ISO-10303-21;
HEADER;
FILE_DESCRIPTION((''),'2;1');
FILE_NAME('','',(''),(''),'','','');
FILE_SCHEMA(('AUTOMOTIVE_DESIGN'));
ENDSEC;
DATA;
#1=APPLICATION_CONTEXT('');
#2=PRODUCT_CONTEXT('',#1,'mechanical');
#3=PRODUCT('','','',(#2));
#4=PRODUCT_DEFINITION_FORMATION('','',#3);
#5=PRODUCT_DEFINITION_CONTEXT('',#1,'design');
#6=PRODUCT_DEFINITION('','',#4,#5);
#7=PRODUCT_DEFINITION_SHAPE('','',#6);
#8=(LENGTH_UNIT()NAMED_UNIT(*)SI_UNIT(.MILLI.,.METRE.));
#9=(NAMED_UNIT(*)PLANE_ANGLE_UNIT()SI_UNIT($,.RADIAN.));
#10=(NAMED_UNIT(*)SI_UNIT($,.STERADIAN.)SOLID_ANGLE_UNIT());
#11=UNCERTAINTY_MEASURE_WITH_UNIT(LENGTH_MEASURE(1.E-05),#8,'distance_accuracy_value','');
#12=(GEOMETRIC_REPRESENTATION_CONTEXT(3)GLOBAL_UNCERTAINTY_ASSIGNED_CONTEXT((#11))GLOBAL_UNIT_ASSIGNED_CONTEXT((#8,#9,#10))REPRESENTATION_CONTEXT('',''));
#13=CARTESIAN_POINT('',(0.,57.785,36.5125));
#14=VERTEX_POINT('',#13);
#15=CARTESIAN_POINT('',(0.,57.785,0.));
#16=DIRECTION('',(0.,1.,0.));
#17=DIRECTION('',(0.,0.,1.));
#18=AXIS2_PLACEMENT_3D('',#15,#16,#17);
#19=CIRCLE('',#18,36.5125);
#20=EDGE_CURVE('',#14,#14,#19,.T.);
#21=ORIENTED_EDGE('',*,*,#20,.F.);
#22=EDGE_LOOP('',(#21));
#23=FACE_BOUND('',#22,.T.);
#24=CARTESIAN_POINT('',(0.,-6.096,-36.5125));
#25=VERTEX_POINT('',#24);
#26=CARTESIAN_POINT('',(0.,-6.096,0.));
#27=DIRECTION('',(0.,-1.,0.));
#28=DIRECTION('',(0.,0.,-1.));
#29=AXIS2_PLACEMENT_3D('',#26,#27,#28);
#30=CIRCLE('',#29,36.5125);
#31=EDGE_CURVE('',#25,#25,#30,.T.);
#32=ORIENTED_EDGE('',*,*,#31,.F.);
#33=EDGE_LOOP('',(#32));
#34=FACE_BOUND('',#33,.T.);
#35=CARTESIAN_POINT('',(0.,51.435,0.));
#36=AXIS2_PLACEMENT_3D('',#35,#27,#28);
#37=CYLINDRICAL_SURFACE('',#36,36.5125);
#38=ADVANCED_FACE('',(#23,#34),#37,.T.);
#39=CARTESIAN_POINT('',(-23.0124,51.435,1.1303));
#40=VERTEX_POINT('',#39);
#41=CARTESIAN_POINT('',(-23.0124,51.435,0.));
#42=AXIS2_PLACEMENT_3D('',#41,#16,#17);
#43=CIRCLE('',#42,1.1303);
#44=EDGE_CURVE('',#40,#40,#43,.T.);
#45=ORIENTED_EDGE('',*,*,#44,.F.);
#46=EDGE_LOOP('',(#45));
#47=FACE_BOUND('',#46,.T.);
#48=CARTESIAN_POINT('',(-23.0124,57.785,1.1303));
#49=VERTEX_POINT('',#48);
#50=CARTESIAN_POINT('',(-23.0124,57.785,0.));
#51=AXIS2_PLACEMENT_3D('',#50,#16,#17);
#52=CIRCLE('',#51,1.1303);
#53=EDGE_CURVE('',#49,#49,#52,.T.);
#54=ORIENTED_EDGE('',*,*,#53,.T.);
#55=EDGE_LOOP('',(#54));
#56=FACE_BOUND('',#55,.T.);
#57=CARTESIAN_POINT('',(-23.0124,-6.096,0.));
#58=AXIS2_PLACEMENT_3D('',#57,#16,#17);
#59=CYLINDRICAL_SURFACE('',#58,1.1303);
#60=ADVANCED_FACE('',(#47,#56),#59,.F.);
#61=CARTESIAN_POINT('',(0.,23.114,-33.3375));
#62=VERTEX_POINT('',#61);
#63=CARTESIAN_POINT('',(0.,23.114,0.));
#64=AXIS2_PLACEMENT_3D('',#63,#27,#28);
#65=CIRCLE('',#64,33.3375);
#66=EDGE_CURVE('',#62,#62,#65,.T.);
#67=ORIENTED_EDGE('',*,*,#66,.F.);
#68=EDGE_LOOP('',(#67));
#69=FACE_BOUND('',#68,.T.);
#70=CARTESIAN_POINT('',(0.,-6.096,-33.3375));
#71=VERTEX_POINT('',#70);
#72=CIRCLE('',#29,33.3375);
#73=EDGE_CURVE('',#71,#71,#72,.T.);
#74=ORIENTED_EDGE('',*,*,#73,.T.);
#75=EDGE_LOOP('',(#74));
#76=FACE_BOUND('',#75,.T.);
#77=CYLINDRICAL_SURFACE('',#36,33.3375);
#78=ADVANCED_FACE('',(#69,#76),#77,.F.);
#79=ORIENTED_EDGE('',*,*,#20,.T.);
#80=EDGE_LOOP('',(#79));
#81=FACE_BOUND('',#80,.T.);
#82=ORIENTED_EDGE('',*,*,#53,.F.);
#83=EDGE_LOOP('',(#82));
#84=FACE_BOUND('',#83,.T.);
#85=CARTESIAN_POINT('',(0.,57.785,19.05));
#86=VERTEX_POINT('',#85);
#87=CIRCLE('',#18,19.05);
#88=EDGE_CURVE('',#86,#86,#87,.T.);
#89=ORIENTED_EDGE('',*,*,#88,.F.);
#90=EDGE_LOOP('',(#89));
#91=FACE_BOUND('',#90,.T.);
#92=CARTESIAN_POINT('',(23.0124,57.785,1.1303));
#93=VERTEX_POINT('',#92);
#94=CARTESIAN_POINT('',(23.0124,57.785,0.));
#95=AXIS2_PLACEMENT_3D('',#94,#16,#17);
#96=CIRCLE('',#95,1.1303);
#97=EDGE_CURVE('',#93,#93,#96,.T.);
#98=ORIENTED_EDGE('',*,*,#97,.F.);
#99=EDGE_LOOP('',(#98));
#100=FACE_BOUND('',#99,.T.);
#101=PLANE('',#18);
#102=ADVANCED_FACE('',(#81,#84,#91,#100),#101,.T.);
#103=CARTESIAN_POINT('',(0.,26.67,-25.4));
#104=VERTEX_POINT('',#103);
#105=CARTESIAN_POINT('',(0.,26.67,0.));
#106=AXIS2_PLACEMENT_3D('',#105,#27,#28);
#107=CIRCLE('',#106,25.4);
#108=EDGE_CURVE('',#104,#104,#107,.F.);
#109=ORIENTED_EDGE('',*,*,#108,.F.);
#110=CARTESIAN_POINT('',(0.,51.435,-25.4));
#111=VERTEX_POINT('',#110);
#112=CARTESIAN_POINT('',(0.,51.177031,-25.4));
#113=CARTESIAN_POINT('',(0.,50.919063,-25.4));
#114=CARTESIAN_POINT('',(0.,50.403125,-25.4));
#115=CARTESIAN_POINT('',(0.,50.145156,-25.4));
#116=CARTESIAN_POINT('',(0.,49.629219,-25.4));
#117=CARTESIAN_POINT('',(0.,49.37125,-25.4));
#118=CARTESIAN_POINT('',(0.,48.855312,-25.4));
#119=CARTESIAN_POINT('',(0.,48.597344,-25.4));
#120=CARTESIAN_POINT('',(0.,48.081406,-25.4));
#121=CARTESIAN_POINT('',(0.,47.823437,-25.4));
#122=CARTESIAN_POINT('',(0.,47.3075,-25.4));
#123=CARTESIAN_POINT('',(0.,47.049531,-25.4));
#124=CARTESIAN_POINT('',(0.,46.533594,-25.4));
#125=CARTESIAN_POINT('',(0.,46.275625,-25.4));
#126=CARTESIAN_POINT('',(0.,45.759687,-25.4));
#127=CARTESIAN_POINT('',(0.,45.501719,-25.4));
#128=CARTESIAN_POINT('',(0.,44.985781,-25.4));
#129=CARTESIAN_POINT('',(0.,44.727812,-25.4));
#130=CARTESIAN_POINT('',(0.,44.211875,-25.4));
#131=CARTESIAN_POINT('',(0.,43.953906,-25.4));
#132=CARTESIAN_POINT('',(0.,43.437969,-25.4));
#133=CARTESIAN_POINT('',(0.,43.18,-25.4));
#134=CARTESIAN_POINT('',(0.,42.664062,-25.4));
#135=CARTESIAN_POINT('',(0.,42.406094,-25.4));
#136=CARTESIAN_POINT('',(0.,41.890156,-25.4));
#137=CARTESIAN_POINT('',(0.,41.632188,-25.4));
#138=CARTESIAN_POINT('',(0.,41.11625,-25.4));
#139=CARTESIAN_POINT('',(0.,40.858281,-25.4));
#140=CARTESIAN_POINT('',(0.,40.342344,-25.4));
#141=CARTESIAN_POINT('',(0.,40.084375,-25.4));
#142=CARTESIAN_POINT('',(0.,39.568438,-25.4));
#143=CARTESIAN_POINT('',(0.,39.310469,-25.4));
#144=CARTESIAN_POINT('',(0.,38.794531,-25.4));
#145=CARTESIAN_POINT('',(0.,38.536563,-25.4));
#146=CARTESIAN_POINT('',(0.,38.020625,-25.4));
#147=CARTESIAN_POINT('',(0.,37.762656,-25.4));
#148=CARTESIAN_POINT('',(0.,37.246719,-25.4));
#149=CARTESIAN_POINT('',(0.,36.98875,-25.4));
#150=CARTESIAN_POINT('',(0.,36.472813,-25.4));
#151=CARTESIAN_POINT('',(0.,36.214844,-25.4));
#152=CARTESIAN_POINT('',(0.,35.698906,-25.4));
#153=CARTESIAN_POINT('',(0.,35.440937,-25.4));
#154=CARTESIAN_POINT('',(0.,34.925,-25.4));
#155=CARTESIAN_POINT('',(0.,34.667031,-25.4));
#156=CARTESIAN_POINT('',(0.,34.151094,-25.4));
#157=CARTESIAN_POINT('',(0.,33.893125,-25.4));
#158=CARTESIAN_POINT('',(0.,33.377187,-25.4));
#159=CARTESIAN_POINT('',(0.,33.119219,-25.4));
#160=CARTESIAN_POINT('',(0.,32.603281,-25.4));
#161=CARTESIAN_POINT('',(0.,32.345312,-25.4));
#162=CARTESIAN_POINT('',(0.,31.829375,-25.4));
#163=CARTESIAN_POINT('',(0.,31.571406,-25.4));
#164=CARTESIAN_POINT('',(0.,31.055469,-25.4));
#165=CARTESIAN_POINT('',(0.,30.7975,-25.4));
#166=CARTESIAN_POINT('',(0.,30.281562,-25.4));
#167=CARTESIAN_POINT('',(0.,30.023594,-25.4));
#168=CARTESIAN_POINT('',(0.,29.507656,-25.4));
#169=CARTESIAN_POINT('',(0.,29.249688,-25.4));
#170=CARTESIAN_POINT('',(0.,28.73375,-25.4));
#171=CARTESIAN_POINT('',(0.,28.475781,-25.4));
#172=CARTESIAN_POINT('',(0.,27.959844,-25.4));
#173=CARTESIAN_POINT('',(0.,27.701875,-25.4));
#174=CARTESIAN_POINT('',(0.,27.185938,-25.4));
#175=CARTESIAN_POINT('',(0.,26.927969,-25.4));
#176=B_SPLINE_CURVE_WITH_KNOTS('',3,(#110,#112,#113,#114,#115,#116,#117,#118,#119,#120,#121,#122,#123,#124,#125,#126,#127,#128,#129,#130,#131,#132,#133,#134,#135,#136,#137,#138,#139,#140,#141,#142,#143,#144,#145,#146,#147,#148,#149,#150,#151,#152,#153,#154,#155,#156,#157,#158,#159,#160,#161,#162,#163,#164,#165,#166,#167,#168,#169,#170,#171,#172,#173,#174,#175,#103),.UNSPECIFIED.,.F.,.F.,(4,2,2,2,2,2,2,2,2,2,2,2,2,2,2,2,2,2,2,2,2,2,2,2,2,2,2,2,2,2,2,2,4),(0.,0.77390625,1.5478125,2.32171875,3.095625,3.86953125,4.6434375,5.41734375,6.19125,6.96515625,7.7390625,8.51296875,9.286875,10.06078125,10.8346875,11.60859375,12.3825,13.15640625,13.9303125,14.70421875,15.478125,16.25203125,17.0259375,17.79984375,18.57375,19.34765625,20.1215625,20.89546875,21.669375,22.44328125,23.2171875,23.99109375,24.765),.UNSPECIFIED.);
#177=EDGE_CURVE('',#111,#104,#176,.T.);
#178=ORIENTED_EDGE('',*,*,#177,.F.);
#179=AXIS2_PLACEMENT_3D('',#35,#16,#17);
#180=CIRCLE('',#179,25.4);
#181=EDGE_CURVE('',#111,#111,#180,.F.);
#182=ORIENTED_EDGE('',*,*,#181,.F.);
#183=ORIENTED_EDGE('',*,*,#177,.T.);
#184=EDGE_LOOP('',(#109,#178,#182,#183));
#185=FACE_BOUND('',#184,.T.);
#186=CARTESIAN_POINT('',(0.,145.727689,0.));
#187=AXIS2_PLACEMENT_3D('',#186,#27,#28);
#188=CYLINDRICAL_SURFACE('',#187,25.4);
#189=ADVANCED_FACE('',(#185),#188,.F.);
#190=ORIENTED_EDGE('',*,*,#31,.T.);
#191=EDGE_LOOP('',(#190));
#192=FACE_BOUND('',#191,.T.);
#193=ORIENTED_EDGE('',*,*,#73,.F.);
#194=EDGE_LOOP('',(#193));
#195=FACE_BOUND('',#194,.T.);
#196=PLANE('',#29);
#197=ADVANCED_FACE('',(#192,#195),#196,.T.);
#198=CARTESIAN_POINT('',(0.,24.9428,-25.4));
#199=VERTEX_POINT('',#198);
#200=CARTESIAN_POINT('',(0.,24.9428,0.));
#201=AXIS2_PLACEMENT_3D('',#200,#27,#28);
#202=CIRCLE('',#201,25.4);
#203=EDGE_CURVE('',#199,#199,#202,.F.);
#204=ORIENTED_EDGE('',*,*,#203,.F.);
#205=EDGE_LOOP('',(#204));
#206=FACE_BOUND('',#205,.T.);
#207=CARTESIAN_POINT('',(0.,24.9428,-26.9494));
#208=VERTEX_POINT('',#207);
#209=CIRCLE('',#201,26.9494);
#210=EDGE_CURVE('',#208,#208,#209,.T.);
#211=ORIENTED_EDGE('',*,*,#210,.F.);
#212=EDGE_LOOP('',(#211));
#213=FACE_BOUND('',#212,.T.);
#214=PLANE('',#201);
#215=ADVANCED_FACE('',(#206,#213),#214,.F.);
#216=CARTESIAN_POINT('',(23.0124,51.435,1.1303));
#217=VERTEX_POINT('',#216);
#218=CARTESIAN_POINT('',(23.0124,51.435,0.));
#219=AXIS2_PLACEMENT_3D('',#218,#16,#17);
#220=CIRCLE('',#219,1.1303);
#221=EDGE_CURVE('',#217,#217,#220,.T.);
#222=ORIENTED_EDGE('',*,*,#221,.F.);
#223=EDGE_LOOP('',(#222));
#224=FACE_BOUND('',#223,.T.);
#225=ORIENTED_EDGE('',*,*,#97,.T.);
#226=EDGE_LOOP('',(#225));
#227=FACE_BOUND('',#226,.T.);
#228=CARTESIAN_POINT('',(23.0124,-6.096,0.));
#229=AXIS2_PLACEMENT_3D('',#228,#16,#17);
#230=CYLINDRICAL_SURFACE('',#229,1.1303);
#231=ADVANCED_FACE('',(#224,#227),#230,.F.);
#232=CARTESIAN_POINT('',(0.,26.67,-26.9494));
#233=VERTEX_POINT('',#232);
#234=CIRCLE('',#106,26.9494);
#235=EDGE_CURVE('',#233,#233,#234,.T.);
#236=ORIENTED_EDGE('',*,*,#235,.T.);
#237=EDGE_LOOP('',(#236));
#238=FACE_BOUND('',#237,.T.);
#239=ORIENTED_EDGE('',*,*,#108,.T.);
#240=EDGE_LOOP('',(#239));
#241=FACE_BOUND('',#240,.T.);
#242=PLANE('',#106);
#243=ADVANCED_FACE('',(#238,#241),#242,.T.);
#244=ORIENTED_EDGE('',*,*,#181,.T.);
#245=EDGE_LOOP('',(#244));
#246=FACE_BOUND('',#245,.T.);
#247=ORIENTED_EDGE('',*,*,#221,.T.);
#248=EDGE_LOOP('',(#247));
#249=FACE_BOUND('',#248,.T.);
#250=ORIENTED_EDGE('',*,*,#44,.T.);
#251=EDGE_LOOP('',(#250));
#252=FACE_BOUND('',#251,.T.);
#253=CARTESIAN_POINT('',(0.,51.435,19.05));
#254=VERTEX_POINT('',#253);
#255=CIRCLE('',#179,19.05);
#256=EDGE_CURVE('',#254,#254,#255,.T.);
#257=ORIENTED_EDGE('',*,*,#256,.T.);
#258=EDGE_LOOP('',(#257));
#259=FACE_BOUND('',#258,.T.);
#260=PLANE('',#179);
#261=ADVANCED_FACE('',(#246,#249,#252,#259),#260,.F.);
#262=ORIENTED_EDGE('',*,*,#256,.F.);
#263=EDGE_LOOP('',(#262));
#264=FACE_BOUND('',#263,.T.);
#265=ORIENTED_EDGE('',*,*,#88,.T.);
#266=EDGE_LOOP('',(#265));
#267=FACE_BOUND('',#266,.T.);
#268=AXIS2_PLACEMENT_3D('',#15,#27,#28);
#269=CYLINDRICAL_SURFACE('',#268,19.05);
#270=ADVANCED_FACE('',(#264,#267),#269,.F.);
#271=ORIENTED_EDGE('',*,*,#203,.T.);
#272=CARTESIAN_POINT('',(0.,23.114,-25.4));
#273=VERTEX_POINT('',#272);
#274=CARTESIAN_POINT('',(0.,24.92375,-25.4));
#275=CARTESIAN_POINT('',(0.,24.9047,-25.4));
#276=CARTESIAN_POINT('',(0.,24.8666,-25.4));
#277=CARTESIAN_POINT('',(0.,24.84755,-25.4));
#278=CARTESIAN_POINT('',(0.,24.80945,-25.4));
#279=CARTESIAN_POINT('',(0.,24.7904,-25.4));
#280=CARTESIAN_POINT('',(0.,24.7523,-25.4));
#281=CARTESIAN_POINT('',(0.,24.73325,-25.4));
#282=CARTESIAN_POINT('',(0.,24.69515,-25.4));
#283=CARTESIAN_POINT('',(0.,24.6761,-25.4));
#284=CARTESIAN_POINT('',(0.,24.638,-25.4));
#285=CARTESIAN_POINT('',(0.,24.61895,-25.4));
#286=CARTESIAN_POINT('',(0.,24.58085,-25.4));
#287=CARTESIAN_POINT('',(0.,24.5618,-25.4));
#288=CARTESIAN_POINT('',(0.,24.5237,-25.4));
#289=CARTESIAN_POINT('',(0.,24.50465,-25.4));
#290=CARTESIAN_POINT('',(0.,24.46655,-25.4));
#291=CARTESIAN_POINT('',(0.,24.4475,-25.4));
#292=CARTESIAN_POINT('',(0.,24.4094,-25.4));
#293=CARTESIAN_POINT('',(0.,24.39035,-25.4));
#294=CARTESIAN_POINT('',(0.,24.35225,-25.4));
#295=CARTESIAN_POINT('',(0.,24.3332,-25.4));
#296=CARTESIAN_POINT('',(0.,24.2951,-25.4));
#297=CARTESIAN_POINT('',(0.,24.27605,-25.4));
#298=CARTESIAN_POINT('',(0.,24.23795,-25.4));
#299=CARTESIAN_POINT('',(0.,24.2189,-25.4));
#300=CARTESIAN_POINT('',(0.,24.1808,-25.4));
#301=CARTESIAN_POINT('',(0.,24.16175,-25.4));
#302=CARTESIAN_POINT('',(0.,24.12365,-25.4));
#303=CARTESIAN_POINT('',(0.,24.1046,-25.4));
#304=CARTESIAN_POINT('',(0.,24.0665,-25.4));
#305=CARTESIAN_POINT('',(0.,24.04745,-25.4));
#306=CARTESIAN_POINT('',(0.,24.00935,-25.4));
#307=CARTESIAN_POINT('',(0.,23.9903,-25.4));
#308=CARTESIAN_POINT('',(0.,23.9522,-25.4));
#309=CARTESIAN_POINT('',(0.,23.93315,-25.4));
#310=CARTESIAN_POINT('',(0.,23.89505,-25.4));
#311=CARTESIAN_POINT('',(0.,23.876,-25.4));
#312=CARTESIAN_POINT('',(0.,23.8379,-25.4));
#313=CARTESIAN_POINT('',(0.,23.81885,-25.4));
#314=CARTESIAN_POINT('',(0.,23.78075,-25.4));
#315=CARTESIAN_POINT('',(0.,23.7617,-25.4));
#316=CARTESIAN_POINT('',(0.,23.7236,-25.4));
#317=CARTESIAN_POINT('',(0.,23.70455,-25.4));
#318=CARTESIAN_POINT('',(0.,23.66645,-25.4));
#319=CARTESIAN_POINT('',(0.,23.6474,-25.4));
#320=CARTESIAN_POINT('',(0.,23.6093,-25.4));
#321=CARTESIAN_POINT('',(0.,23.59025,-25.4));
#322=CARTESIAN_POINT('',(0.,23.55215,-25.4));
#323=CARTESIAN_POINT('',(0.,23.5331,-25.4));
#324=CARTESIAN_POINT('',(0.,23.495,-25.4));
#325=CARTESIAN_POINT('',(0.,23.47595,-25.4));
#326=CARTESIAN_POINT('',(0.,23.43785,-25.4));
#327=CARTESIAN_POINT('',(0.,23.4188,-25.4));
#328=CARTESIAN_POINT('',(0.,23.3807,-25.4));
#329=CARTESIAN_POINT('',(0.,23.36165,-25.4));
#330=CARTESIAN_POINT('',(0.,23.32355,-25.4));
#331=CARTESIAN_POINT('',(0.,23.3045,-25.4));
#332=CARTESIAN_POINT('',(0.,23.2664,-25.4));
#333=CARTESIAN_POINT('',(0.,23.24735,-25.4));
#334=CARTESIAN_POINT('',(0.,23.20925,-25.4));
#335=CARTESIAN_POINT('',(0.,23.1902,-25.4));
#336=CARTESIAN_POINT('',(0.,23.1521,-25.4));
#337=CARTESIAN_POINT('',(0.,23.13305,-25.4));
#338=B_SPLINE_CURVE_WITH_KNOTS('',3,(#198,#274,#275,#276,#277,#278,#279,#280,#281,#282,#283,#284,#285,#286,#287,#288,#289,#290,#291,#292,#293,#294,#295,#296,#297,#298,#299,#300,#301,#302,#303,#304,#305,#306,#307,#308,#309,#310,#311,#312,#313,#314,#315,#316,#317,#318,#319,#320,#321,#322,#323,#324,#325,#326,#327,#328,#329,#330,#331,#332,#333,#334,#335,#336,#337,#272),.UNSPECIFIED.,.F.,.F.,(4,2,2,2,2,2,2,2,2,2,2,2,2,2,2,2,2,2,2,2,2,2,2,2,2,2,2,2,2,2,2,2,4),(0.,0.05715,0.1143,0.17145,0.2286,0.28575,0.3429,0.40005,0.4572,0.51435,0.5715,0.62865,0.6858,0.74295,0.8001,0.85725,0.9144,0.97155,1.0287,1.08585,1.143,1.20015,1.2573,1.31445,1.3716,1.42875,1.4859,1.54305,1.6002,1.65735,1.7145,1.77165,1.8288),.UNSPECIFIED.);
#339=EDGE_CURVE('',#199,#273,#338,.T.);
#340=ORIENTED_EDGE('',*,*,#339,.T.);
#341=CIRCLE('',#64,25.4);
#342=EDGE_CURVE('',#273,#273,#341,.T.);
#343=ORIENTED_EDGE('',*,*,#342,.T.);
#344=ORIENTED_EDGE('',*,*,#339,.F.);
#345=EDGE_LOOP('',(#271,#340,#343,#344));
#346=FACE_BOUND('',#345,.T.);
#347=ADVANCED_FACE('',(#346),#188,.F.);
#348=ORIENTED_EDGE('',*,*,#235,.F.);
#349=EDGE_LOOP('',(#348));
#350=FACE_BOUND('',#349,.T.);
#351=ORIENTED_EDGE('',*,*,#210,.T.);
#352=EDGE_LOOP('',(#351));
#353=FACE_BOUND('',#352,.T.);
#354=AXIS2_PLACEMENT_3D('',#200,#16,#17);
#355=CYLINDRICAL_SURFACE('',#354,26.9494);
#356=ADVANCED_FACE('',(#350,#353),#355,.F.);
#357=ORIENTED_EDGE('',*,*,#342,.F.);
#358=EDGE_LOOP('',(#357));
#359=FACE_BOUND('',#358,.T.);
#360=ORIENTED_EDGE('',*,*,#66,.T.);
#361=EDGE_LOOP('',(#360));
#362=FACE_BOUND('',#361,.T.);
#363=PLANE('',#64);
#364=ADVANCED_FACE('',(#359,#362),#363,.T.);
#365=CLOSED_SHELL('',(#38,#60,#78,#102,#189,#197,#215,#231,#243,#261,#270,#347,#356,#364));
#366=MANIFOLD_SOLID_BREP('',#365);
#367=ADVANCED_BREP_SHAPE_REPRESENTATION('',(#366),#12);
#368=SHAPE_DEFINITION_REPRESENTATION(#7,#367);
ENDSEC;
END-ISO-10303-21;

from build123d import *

# Parameters (mm, degrees)
SKETCH1_R           = 36.5125
SKETCH1_R_2         = 33.3375
BOSS_EXTRUDE1_DEPTH = 51.435
BOSS_EXTRUDE5_START = 6.096
SKETCH6_R           = 36.5125
SKETCH6_R_2         = 33.3375
BOSS_EXTRUDE5_DEPTH = 6.096
SKETCH12_R          = 33.3375
SKETCH12_R_2        = 25.4
BOSS_EXTRUDE8_DEPTH = 28.321
SKETCH2_R           = 36.5125
SKETCH2_R_2         = 19.05
BOSS_EXTRUDE2_DEPTH = 6.35
SKETCH4_R           = 26.9494
CUT_EXTRUDE1_DEPTH  = 1.7272
SKETCH5_R           = 1.1303
CUT_EXTRUDE5_DEPTH  = 83.140778384


with BuildPart() as part:
    # Sketch1 → Boss-Extrude1 (new body)
    with BuildSketch(Plane(origin=(0, 0, 0), x_dir=(1, 0, 0), z_dir=(0, 1, 0))):
        with Locations(Location((0, 0, 0), (0, 0, 270))):
            Circle(SKETCH1_R)
        with Locations(Location((0, 0, 0), (0, 0, 270))):
            Circle(SKETCH1_R_2, mode=Mode.SUBTRACT)
    extrude(amount=BOSS_EXTRUDE1_DEPTH)

    # Sketch6 → Boss-Extrude5 (add)
    with BuildSketch(Plane.XZ.offset(BOSS_EXTRUDE5_START)):
        with Locations(Location((0, 0, 0), (0, 0, 270))):
            Circle(SKETCH6_R)
        with Locations(Location((0, 0, 0), (0, 0, 270))):
            Circle(SKETCH6_R_2, mode=Mode.SUBTRACT)
    extrude(amount=-BOSS_EXTRUDE5_DEPTH)

    # Sketch12 → Boss-Extrude8 (add)
    with BuildSketch(Plane.XZ.offset(-23.114)):
        with Locations(Location((0, 0, 0), (0, 0, 270))):
            Circle(SKETCH12_R)
        with Locations(Location((0, 0, 0), (0, 0, 270))):
            Circle(SKETCH12_R_2, mode=Mode.SUBTRACT)
    extrude(amount=-BOSS_EXTRUDE8_DEPTH)

    # Sketch2 → Boss-Extrude2 (add)
    with BuildSketch(Plane(origin=(0, 51.435, 0), x_dir=(1, 0, 0), z_dir=(0, 1, 0))):
        with Locations(Location((0, 0, 0), (0, 0, 90))):
            Circle(SKETCH2_R)
        with Locations(Location((0, 0, 0), (0, 0, 270))):
            Circle(SKETCH2_R_2, mode=Mode.SUBTRACT)
    extrude(amount=BOSS_EXTRUDE2_DEPTH)

    # Sketch4 → Cut-Extrude1 (cut)
    with BuildSketch(Plane.XZ.offset(-26.67)):
        with Locations(Location((0, 0, 0), (0, 0, 270))):
            Circle(SKETCH4_R)
    extrude(amount=CUT_EXTRUDE1_DEPTH, mode=Mode.SUBTRACT)

    # Sketch5 → Cut-Extrude5 (cut, through all)
    with BuildSketch(Plane(origin=(0, 57.785, 0), x_dir=(1, 0, 0), z_dir=(0, 1, 0))):
        with Locations(Location((-23.0124, 0, 0), (0, 0, 270))):
            Circle(SKETCH5_R)
        with Locations(Location((23.0124, 0, 0), (0, 0, 270))):
            Circle(SKETCH5_R)
    extrude(amount=-CUT_EXTRUDE5_DEPTH, mode=Mode.SUBTRACT)


solid = part.part
